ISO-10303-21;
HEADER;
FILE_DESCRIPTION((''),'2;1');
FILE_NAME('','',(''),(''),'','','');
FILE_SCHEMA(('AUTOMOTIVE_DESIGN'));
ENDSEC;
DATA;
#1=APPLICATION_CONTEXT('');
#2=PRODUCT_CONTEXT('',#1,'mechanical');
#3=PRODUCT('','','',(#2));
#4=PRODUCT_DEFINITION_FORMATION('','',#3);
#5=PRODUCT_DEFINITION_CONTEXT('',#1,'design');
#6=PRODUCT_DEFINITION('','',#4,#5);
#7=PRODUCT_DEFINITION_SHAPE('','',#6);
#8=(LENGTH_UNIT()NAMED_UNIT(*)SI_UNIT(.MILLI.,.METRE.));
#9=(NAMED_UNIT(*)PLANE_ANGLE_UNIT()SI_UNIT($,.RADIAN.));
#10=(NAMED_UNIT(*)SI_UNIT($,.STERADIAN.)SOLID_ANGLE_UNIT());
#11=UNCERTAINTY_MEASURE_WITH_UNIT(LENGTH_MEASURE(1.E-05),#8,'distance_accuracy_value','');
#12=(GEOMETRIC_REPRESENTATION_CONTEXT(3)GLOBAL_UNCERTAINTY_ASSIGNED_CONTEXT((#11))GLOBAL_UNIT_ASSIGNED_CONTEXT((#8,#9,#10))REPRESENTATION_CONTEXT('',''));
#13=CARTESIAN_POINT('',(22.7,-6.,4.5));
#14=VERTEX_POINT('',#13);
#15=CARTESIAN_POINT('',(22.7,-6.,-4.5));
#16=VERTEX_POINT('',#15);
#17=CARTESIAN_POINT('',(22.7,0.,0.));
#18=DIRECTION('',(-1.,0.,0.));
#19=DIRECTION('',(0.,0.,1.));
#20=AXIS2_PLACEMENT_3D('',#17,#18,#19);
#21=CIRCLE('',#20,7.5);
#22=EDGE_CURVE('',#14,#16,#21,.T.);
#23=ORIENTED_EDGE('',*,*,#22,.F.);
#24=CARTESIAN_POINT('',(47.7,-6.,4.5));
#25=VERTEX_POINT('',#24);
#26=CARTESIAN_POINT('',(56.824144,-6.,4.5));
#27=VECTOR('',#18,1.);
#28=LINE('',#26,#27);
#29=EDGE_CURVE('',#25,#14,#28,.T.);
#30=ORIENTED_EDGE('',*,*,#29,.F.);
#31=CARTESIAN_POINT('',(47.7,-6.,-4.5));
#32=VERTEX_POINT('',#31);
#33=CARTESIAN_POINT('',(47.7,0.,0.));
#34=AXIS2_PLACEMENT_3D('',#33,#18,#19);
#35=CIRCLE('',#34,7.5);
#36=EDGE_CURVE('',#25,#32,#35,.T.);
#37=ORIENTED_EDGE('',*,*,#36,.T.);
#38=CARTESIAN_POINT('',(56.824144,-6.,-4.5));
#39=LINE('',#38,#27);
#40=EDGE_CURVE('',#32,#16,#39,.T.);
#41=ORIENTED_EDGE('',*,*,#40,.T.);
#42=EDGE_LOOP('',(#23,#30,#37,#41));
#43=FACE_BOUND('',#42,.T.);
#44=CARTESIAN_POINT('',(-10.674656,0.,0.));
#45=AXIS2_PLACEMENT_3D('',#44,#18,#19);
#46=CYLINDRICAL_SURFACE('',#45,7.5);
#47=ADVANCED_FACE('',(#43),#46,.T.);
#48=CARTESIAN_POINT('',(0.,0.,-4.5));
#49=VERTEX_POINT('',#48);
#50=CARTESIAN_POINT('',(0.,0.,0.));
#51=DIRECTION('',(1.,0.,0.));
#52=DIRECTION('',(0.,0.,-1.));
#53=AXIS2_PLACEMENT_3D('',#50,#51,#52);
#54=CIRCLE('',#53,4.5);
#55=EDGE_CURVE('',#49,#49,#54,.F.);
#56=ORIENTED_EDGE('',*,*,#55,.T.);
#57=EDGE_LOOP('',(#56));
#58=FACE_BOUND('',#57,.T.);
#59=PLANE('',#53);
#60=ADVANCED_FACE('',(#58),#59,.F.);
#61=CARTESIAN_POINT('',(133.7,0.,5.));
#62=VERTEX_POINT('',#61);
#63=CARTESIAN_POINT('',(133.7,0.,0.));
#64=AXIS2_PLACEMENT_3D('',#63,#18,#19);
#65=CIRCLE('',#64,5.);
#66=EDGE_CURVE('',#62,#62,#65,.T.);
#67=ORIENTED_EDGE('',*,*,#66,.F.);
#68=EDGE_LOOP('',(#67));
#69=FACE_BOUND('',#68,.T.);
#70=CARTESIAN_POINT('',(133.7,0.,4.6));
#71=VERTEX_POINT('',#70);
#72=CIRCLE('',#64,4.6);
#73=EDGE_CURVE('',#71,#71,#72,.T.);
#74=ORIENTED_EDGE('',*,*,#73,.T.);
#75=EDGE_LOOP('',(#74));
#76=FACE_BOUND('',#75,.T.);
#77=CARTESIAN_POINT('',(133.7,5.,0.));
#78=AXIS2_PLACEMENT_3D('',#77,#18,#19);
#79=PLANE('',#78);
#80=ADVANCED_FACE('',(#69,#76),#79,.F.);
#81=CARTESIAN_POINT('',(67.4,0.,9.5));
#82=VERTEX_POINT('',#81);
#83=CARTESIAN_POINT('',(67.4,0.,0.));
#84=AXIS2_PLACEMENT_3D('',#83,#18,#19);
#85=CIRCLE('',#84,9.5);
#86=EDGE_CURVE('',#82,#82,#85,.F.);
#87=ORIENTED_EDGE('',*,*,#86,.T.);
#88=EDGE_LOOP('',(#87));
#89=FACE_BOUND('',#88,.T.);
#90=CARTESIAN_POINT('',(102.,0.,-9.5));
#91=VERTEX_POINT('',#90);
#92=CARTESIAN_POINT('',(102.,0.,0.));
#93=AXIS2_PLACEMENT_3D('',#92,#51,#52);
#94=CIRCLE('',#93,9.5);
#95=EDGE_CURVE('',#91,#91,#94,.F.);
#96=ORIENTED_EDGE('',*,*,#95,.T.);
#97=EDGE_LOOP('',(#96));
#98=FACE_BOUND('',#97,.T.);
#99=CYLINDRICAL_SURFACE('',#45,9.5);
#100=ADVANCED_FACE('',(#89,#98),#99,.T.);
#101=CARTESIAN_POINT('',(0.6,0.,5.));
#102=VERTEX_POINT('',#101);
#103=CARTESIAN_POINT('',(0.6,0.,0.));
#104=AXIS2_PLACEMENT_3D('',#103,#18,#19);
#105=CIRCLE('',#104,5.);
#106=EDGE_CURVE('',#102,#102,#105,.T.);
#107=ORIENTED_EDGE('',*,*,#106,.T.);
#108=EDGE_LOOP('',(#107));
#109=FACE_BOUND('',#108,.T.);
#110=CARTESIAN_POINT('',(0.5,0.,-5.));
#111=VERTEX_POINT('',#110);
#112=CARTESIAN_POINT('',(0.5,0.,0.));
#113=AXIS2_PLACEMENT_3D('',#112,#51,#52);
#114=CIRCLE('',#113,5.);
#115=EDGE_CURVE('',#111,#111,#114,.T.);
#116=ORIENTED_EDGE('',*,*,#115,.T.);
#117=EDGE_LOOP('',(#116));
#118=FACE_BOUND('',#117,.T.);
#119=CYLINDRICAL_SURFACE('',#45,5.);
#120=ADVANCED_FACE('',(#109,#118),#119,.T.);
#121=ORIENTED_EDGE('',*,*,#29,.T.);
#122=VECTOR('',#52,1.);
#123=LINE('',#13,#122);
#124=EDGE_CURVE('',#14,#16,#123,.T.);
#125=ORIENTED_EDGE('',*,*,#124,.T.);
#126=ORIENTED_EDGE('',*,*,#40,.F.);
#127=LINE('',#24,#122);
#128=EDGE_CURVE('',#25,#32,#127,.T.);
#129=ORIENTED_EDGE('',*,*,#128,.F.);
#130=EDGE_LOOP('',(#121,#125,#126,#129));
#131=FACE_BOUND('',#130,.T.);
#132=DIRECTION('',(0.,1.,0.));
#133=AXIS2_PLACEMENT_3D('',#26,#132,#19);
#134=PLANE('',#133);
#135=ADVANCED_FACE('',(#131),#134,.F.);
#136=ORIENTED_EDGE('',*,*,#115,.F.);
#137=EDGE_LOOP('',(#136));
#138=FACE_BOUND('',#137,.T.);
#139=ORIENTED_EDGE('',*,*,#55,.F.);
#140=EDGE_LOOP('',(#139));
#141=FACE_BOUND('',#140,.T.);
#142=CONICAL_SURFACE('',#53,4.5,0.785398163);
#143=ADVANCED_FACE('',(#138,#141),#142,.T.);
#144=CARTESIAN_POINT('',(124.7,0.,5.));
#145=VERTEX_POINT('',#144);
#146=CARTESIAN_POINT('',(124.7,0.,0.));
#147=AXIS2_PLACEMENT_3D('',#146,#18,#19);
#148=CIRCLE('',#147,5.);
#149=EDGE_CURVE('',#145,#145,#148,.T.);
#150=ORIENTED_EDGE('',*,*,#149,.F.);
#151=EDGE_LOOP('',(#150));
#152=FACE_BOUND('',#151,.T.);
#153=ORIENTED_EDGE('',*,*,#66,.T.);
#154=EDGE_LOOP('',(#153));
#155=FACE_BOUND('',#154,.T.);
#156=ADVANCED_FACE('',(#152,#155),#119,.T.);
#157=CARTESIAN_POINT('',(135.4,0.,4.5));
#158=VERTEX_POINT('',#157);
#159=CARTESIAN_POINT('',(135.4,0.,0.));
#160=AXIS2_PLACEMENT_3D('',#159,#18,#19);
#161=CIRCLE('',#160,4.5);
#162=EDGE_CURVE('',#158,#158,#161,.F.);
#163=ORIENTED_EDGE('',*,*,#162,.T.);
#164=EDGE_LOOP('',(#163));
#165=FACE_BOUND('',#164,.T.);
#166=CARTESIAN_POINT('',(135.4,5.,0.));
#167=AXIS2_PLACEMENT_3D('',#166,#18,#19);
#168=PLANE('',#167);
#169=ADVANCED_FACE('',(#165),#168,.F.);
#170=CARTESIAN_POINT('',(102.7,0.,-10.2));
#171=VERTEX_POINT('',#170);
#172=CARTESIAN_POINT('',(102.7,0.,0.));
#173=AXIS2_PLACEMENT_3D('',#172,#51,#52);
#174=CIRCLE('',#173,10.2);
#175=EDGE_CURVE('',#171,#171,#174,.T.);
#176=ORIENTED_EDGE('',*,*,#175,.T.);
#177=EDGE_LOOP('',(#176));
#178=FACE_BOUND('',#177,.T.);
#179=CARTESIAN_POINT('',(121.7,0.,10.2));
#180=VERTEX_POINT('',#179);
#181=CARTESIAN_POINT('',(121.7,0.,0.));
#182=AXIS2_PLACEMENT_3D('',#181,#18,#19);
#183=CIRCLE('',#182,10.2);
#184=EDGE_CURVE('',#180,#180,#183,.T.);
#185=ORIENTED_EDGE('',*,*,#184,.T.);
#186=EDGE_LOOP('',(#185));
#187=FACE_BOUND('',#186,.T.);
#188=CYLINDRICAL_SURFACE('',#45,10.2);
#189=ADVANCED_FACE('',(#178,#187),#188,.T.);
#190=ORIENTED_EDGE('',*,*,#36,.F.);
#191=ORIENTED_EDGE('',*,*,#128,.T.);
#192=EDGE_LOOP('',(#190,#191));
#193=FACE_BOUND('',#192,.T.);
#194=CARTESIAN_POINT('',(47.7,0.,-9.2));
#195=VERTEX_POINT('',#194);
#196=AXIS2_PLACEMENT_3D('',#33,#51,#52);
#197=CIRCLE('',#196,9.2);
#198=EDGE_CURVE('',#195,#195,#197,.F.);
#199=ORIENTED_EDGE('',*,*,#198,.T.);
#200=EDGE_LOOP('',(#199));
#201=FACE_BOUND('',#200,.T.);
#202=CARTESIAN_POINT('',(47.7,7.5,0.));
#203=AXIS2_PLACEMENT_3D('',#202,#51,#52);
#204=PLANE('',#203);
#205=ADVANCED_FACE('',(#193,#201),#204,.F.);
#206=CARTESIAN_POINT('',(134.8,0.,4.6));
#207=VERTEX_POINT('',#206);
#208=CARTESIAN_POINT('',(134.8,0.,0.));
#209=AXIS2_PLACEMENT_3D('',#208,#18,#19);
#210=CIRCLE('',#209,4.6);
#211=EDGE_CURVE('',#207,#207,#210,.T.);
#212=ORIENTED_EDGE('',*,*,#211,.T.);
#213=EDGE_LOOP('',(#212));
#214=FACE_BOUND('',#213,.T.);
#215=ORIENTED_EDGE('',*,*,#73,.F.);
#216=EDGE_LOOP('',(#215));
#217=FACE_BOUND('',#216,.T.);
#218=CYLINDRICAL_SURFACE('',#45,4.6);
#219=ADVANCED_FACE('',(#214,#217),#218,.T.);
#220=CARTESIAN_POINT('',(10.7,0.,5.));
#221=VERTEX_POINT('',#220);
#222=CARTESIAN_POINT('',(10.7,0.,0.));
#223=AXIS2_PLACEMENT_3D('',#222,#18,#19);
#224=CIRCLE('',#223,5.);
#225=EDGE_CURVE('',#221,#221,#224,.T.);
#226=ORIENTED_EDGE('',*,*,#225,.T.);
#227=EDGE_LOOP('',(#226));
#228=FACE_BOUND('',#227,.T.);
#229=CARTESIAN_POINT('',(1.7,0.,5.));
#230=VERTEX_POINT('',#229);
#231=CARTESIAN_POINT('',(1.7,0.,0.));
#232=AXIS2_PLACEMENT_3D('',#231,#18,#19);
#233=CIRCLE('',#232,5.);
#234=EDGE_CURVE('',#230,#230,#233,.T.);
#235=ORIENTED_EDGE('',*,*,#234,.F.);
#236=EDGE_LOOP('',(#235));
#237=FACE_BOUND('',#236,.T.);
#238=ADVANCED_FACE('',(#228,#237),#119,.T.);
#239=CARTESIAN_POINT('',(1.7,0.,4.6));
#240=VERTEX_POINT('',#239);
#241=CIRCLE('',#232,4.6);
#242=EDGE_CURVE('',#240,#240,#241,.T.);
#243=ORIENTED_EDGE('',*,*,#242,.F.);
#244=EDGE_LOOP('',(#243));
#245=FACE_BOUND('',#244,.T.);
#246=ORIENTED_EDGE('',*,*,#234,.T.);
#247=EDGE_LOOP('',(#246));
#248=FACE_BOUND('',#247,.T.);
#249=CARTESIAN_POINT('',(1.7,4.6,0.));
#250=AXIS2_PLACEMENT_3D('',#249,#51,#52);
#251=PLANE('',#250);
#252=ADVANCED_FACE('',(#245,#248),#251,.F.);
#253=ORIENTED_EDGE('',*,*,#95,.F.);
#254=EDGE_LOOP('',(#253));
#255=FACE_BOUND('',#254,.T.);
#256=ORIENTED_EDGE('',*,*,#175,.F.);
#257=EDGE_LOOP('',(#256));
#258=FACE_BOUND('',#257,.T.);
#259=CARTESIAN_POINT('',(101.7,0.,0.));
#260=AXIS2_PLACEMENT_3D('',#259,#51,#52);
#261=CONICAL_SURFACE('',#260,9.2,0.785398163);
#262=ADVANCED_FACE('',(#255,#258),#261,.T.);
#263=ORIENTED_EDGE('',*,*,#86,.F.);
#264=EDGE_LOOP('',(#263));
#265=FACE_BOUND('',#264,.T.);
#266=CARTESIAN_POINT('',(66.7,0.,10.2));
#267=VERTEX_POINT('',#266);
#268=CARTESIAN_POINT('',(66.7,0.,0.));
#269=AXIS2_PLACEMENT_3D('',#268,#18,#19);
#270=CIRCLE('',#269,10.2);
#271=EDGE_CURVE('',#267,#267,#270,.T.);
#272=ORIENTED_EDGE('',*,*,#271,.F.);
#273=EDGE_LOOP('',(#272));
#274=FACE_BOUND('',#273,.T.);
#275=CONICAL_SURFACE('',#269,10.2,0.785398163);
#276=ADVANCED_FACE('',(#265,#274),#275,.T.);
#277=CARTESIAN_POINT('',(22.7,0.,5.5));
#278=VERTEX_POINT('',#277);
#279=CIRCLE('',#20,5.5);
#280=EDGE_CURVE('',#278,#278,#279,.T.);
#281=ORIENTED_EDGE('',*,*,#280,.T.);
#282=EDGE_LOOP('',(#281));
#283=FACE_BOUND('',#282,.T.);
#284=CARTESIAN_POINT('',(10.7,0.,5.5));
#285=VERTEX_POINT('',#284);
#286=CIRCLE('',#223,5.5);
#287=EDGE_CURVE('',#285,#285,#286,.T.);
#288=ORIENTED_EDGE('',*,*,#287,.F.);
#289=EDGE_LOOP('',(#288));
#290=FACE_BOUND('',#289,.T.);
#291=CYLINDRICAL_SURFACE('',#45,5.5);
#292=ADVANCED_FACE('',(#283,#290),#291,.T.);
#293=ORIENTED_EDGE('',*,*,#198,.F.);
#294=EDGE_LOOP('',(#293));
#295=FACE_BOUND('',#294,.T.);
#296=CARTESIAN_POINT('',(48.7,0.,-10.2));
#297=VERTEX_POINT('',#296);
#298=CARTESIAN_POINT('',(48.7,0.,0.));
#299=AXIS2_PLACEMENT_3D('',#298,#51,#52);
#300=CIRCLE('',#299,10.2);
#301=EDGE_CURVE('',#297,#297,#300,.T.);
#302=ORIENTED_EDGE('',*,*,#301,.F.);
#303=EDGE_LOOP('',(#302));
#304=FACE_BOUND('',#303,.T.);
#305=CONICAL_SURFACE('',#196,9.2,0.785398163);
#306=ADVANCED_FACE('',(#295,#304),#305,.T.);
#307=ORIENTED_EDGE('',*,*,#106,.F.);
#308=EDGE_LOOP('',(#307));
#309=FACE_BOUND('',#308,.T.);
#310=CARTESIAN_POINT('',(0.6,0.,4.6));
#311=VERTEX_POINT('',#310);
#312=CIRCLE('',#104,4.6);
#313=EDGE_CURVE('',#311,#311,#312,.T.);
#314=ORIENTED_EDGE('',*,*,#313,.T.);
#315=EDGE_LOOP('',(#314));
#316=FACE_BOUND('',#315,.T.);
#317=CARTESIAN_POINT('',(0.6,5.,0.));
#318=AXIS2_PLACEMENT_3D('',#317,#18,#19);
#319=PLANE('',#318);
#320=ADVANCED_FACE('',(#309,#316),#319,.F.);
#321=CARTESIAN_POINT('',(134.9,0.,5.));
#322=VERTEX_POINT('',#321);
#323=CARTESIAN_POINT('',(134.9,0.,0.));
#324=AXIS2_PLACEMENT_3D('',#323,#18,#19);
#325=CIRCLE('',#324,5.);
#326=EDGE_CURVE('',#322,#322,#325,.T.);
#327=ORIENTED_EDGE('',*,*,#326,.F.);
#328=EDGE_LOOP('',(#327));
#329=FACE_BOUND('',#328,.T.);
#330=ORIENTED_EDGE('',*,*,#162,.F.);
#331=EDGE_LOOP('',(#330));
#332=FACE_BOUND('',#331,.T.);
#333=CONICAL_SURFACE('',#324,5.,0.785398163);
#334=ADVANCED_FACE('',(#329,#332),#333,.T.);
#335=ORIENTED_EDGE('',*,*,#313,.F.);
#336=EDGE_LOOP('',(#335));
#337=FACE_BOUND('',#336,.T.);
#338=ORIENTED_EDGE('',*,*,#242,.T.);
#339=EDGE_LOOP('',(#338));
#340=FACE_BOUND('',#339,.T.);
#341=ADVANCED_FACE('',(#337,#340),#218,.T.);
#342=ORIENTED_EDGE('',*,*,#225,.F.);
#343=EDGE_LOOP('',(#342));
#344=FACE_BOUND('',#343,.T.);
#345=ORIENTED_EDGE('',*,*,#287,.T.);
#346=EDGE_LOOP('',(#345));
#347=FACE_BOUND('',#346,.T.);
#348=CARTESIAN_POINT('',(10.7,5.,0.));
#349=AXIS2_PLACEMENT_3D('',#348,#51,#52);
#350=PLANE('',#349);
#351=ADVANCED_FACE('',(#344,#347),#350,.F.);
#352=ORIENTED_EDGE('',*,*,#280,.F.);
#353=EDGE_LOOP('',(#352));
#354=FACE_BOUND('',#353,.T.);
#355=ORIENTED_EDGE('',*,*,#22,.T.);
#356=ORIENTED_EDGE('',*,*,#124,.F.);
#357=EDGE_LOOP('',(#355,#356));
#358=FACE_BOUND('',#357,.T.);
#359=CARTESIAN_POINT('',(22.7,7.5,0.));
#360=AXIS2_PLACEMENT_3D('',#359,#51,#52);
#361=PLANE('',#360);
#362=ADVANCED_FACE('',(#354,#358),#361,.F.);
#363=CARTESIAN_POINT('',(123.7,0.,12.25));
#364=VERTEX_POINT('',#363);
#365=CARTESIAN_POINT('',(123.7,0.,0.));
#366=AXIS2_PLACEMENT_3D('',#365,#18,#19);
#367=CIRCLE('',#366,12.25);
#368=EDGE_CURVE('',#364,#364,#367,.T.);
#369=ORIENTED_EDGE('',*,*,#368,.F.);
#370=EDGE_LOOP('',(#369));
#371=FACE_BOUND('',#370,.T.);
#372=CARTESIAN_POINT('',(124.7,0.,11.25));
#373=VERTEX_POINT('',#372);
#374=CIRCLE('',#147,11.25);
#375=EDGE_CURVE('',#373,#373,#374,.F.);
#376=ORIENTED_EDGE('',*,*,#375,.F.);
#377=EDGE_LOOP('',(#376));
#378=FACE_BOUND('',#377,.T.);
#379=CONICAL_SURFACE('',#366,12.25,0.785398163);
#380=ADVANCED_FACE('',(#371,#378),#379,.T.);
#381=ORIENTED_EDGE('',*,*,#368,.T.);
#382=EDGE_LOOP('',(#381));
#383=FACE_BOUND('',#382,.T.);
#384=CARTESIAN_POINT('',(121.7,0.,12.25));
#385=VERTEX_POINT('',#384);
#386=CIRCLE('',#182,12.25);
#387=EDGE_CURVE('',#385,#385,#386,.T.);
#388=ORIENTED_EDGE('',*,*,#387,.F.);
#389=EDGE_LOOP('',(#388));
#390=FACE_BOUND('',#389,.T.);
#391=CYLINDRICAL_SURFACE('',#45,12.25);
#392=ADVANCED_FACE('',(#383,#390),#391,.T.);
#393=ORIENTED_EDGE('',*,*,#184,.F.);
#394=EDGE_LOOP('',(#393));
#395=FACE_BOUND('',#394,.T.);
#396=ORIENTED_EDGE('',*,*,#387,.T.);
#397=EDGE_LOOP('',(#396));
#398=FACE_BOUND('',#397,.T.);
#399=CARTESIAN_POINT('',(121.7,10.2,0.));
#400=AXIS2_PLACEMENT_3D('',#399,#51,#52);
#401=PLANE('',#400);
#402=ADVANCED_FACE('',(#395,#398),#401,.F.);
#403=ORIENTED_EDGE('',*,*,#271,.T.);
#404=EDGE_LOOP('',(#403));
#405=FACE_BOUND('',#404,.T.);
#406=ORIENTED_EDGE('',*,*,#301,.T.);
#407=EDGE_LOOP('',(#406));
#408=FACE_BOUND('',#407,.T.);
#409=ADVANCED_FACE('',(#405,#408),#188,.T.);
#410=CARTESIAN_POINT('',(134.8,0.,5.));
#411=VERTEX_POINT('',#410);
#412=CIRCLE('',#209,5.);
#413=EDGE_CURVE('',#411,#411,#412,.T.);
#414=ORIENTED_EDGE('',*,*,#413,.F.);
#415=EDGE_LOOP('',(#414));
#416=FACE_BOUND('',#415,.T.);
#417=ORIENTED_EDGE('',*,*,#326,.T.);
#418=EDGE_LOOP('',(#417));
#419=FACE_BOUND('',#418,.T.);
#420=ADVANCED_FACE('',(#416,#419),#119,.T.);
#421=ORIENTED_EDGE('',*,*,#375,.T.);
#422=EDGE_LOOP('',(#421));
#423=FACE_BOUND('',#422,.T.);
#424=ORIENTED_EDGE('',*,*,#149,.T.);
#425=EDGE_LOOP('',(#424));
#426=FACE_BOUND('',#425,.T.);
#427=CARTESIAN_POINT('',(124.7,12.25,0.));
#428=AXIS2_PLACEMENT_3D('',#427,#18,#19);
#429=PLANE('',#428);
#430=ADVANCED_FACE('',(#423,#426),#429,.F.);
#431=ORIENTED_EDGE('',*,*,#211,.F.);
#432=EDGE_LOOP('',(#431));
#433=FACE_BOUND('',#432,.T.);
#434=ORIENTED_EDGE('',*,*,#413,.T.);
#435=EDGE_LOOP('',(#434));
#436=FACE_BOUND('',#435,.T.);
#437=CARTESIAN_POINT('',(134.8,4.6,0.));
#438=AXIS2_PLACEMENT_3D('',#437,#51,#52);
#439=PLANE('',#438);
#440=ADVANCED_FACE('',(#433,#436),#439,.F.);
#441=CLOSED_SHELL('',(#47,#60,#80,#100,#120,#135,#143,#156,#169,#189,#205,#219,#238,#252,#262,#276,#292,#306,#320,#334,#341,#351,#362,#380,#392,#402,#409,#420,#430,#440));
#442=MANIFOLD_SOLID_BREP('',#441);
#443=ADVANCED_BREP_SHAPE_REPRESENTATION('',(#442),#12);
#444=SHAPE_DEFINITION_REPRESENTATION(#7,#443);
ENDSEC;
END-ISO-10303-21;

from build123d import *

# Parameters (mm, degrees)
SFAZOWANIE1_SIZE           = 1
SFAZOWANIE2_SIZE           = 0.5
WYTNIJ_WYCI_GNI_CIE1_START = -25
WYTNIJ_WYCI_GNI_CIE1_DEPTH = 25


with BuildPart() as part:
    # Szkic1 → Obrót1 (revolve)
    with BuildSketch(Plane.XY, mode=Mode.PRIVATE) as obr_t1_sk:
        Polygon((0, 0), (0, 5), (0.6, 5), (0.6, 4.6), (1.7, 4.6), (1.7, 5), (10.7, 5), (10.7, 5.5), (22.7, 5.5), (22.7, 7.5), (47.7, 7.5), (47.7, 10.2), (67.7, 10.2), (67.7, 9.5), (101.7, 9.5), (101.7, 10.2), (121.7, 10.2), (121.7, 12.25), (124.7, 12.25), (124.7, 5), (133.7, 5), (133.7, 4.6), (134.8, 4.6), (134.8, 5), (135.4, 5), (135.4, 0), align=None)
    revolve(obr_t1_sk.sketch.rotate(Axis((-10.674656103, 0, 0), (1, 0, 0)), 90), axis=Axis((-10.674656103, 0, 0), (1, 0, 0)))

    # Sfazowanie1
    # the kernel refuses this chamfer: 1 mm, written as the material it takes off along each edge
    with BuildSketch(Plane(origin=(101.7, 0, 0), x_dir=(0, 0, 1), z_dir=(0, 1, 0))) as sfazowanie1_piece_1_section:
        Polygon((10.2 - SFAZOWANIE1_SIZE, 0), (10.2, SFAZOWANIE1_SIZE), (10.2, 0), align=None)
    sfazowanie1_piece_1 = revolve(axis=Axis((101.7, 0, 0), (1, 0, 0)), mode=Mode.PRIVATE)
    sfazowanie1_piece_1 = sfazowanie1_piece_1 - Plane(origin=(102.341981052, 0, 0), x_dir=(0, 0, 1), z_dir=(1, 0, 0)) * Cylinder(9.5, 41, mode=Mode.PRIVATE)
    add(sfazowanie1_piece_1, mode=Mode.SUBTRACT)
    with BuildSketch(Plane(origin=(67.7, 0, 0), x_dir=(0, 0, 1), z_dir=(0, 1, 0))) as sfazowanie1_piece_2_section:
        Polygon((10.2, -SFAZOWANIE1_SIZE), (10.2 - SFAZOWANIE1_SIZE, 0), (10.2, 0), align=None)
    sfazowanie1_piece_2 = revolve(axis=Axis((67.7, 0, 0), (1, 0, 0)), mode=Mode.PRIVATE)
    sfazowanie1_piece_2 = sfazowanie1_piece_2 - Plane(origin=(67.058018948, 0, 0), x_dir=(0, 0, 1), z_dir=(1, 0, 0)) * Cylinder(9.5, 41, mode=Mode.PRIVATE)
    add(sfazowanie1_piece_2, mode=Mode.SUBTRACT)
    with BuildSketch(Plane(origin=(124.7, 0, 0), x_dir=(0, 0, 1), z_dir=(0, 1, 0))) as sfazowanie1_piece_3:
        Polygon((12.25, -SFAZOWANIE1_SIZE), (12.25 - SFAZOWANIE1_SIZE, 0), (12.25, 0), align=None)
    revolve(axis=Axis((124.7, 0, 0), (1, 0, 0)), mode=Mode.SUBTRACT)
    with BuildSketch(Plane(origin=(47.7, 0, 0), x_dir=(0, 0, 1), z_dir=(0, 1, 0))) as sfazowanie1_piece_4:
        Polygon((10.2 - SFAZOWANIE1_SIZE, 0), (10.2, SFAZOWANIE1_SIZE), (10.2, 0), align=None)
    revolve(axis=Axis((47.7, 0, 0), (1, 0, 0)), mode=Mode.SUBTRACT)

    # Sfazowanie2
    sfazowanie2_edges = [part.edges().sort_by_distance(p)[0] for p in [
        (135.4, 0, -5),
        (0, 0, -5),
    ]]
    chamfer(sfazowanie2_edges, length=SFAZOWANIE2_SIZE)

    # Szkic2 → Wytnij-wyciągnięcie1 (cut)
    with BuildSketch(Plane.ZY.offset(-22.7).offset(WYTNIJ_WYCI_GNI_CIE1_START)):
        with BuildLine():
            Line((4.5, -6), (-4.5, -6))
            ThreePointArc((-4.5, -6), (0, -7.5), (4.5, -6))
        make_face()
    extrude(amount=WYTNIJ_WYCI_GNI_CIE1_DEPTH, mode=Mode.SUBTRACT)


solid = part.part
